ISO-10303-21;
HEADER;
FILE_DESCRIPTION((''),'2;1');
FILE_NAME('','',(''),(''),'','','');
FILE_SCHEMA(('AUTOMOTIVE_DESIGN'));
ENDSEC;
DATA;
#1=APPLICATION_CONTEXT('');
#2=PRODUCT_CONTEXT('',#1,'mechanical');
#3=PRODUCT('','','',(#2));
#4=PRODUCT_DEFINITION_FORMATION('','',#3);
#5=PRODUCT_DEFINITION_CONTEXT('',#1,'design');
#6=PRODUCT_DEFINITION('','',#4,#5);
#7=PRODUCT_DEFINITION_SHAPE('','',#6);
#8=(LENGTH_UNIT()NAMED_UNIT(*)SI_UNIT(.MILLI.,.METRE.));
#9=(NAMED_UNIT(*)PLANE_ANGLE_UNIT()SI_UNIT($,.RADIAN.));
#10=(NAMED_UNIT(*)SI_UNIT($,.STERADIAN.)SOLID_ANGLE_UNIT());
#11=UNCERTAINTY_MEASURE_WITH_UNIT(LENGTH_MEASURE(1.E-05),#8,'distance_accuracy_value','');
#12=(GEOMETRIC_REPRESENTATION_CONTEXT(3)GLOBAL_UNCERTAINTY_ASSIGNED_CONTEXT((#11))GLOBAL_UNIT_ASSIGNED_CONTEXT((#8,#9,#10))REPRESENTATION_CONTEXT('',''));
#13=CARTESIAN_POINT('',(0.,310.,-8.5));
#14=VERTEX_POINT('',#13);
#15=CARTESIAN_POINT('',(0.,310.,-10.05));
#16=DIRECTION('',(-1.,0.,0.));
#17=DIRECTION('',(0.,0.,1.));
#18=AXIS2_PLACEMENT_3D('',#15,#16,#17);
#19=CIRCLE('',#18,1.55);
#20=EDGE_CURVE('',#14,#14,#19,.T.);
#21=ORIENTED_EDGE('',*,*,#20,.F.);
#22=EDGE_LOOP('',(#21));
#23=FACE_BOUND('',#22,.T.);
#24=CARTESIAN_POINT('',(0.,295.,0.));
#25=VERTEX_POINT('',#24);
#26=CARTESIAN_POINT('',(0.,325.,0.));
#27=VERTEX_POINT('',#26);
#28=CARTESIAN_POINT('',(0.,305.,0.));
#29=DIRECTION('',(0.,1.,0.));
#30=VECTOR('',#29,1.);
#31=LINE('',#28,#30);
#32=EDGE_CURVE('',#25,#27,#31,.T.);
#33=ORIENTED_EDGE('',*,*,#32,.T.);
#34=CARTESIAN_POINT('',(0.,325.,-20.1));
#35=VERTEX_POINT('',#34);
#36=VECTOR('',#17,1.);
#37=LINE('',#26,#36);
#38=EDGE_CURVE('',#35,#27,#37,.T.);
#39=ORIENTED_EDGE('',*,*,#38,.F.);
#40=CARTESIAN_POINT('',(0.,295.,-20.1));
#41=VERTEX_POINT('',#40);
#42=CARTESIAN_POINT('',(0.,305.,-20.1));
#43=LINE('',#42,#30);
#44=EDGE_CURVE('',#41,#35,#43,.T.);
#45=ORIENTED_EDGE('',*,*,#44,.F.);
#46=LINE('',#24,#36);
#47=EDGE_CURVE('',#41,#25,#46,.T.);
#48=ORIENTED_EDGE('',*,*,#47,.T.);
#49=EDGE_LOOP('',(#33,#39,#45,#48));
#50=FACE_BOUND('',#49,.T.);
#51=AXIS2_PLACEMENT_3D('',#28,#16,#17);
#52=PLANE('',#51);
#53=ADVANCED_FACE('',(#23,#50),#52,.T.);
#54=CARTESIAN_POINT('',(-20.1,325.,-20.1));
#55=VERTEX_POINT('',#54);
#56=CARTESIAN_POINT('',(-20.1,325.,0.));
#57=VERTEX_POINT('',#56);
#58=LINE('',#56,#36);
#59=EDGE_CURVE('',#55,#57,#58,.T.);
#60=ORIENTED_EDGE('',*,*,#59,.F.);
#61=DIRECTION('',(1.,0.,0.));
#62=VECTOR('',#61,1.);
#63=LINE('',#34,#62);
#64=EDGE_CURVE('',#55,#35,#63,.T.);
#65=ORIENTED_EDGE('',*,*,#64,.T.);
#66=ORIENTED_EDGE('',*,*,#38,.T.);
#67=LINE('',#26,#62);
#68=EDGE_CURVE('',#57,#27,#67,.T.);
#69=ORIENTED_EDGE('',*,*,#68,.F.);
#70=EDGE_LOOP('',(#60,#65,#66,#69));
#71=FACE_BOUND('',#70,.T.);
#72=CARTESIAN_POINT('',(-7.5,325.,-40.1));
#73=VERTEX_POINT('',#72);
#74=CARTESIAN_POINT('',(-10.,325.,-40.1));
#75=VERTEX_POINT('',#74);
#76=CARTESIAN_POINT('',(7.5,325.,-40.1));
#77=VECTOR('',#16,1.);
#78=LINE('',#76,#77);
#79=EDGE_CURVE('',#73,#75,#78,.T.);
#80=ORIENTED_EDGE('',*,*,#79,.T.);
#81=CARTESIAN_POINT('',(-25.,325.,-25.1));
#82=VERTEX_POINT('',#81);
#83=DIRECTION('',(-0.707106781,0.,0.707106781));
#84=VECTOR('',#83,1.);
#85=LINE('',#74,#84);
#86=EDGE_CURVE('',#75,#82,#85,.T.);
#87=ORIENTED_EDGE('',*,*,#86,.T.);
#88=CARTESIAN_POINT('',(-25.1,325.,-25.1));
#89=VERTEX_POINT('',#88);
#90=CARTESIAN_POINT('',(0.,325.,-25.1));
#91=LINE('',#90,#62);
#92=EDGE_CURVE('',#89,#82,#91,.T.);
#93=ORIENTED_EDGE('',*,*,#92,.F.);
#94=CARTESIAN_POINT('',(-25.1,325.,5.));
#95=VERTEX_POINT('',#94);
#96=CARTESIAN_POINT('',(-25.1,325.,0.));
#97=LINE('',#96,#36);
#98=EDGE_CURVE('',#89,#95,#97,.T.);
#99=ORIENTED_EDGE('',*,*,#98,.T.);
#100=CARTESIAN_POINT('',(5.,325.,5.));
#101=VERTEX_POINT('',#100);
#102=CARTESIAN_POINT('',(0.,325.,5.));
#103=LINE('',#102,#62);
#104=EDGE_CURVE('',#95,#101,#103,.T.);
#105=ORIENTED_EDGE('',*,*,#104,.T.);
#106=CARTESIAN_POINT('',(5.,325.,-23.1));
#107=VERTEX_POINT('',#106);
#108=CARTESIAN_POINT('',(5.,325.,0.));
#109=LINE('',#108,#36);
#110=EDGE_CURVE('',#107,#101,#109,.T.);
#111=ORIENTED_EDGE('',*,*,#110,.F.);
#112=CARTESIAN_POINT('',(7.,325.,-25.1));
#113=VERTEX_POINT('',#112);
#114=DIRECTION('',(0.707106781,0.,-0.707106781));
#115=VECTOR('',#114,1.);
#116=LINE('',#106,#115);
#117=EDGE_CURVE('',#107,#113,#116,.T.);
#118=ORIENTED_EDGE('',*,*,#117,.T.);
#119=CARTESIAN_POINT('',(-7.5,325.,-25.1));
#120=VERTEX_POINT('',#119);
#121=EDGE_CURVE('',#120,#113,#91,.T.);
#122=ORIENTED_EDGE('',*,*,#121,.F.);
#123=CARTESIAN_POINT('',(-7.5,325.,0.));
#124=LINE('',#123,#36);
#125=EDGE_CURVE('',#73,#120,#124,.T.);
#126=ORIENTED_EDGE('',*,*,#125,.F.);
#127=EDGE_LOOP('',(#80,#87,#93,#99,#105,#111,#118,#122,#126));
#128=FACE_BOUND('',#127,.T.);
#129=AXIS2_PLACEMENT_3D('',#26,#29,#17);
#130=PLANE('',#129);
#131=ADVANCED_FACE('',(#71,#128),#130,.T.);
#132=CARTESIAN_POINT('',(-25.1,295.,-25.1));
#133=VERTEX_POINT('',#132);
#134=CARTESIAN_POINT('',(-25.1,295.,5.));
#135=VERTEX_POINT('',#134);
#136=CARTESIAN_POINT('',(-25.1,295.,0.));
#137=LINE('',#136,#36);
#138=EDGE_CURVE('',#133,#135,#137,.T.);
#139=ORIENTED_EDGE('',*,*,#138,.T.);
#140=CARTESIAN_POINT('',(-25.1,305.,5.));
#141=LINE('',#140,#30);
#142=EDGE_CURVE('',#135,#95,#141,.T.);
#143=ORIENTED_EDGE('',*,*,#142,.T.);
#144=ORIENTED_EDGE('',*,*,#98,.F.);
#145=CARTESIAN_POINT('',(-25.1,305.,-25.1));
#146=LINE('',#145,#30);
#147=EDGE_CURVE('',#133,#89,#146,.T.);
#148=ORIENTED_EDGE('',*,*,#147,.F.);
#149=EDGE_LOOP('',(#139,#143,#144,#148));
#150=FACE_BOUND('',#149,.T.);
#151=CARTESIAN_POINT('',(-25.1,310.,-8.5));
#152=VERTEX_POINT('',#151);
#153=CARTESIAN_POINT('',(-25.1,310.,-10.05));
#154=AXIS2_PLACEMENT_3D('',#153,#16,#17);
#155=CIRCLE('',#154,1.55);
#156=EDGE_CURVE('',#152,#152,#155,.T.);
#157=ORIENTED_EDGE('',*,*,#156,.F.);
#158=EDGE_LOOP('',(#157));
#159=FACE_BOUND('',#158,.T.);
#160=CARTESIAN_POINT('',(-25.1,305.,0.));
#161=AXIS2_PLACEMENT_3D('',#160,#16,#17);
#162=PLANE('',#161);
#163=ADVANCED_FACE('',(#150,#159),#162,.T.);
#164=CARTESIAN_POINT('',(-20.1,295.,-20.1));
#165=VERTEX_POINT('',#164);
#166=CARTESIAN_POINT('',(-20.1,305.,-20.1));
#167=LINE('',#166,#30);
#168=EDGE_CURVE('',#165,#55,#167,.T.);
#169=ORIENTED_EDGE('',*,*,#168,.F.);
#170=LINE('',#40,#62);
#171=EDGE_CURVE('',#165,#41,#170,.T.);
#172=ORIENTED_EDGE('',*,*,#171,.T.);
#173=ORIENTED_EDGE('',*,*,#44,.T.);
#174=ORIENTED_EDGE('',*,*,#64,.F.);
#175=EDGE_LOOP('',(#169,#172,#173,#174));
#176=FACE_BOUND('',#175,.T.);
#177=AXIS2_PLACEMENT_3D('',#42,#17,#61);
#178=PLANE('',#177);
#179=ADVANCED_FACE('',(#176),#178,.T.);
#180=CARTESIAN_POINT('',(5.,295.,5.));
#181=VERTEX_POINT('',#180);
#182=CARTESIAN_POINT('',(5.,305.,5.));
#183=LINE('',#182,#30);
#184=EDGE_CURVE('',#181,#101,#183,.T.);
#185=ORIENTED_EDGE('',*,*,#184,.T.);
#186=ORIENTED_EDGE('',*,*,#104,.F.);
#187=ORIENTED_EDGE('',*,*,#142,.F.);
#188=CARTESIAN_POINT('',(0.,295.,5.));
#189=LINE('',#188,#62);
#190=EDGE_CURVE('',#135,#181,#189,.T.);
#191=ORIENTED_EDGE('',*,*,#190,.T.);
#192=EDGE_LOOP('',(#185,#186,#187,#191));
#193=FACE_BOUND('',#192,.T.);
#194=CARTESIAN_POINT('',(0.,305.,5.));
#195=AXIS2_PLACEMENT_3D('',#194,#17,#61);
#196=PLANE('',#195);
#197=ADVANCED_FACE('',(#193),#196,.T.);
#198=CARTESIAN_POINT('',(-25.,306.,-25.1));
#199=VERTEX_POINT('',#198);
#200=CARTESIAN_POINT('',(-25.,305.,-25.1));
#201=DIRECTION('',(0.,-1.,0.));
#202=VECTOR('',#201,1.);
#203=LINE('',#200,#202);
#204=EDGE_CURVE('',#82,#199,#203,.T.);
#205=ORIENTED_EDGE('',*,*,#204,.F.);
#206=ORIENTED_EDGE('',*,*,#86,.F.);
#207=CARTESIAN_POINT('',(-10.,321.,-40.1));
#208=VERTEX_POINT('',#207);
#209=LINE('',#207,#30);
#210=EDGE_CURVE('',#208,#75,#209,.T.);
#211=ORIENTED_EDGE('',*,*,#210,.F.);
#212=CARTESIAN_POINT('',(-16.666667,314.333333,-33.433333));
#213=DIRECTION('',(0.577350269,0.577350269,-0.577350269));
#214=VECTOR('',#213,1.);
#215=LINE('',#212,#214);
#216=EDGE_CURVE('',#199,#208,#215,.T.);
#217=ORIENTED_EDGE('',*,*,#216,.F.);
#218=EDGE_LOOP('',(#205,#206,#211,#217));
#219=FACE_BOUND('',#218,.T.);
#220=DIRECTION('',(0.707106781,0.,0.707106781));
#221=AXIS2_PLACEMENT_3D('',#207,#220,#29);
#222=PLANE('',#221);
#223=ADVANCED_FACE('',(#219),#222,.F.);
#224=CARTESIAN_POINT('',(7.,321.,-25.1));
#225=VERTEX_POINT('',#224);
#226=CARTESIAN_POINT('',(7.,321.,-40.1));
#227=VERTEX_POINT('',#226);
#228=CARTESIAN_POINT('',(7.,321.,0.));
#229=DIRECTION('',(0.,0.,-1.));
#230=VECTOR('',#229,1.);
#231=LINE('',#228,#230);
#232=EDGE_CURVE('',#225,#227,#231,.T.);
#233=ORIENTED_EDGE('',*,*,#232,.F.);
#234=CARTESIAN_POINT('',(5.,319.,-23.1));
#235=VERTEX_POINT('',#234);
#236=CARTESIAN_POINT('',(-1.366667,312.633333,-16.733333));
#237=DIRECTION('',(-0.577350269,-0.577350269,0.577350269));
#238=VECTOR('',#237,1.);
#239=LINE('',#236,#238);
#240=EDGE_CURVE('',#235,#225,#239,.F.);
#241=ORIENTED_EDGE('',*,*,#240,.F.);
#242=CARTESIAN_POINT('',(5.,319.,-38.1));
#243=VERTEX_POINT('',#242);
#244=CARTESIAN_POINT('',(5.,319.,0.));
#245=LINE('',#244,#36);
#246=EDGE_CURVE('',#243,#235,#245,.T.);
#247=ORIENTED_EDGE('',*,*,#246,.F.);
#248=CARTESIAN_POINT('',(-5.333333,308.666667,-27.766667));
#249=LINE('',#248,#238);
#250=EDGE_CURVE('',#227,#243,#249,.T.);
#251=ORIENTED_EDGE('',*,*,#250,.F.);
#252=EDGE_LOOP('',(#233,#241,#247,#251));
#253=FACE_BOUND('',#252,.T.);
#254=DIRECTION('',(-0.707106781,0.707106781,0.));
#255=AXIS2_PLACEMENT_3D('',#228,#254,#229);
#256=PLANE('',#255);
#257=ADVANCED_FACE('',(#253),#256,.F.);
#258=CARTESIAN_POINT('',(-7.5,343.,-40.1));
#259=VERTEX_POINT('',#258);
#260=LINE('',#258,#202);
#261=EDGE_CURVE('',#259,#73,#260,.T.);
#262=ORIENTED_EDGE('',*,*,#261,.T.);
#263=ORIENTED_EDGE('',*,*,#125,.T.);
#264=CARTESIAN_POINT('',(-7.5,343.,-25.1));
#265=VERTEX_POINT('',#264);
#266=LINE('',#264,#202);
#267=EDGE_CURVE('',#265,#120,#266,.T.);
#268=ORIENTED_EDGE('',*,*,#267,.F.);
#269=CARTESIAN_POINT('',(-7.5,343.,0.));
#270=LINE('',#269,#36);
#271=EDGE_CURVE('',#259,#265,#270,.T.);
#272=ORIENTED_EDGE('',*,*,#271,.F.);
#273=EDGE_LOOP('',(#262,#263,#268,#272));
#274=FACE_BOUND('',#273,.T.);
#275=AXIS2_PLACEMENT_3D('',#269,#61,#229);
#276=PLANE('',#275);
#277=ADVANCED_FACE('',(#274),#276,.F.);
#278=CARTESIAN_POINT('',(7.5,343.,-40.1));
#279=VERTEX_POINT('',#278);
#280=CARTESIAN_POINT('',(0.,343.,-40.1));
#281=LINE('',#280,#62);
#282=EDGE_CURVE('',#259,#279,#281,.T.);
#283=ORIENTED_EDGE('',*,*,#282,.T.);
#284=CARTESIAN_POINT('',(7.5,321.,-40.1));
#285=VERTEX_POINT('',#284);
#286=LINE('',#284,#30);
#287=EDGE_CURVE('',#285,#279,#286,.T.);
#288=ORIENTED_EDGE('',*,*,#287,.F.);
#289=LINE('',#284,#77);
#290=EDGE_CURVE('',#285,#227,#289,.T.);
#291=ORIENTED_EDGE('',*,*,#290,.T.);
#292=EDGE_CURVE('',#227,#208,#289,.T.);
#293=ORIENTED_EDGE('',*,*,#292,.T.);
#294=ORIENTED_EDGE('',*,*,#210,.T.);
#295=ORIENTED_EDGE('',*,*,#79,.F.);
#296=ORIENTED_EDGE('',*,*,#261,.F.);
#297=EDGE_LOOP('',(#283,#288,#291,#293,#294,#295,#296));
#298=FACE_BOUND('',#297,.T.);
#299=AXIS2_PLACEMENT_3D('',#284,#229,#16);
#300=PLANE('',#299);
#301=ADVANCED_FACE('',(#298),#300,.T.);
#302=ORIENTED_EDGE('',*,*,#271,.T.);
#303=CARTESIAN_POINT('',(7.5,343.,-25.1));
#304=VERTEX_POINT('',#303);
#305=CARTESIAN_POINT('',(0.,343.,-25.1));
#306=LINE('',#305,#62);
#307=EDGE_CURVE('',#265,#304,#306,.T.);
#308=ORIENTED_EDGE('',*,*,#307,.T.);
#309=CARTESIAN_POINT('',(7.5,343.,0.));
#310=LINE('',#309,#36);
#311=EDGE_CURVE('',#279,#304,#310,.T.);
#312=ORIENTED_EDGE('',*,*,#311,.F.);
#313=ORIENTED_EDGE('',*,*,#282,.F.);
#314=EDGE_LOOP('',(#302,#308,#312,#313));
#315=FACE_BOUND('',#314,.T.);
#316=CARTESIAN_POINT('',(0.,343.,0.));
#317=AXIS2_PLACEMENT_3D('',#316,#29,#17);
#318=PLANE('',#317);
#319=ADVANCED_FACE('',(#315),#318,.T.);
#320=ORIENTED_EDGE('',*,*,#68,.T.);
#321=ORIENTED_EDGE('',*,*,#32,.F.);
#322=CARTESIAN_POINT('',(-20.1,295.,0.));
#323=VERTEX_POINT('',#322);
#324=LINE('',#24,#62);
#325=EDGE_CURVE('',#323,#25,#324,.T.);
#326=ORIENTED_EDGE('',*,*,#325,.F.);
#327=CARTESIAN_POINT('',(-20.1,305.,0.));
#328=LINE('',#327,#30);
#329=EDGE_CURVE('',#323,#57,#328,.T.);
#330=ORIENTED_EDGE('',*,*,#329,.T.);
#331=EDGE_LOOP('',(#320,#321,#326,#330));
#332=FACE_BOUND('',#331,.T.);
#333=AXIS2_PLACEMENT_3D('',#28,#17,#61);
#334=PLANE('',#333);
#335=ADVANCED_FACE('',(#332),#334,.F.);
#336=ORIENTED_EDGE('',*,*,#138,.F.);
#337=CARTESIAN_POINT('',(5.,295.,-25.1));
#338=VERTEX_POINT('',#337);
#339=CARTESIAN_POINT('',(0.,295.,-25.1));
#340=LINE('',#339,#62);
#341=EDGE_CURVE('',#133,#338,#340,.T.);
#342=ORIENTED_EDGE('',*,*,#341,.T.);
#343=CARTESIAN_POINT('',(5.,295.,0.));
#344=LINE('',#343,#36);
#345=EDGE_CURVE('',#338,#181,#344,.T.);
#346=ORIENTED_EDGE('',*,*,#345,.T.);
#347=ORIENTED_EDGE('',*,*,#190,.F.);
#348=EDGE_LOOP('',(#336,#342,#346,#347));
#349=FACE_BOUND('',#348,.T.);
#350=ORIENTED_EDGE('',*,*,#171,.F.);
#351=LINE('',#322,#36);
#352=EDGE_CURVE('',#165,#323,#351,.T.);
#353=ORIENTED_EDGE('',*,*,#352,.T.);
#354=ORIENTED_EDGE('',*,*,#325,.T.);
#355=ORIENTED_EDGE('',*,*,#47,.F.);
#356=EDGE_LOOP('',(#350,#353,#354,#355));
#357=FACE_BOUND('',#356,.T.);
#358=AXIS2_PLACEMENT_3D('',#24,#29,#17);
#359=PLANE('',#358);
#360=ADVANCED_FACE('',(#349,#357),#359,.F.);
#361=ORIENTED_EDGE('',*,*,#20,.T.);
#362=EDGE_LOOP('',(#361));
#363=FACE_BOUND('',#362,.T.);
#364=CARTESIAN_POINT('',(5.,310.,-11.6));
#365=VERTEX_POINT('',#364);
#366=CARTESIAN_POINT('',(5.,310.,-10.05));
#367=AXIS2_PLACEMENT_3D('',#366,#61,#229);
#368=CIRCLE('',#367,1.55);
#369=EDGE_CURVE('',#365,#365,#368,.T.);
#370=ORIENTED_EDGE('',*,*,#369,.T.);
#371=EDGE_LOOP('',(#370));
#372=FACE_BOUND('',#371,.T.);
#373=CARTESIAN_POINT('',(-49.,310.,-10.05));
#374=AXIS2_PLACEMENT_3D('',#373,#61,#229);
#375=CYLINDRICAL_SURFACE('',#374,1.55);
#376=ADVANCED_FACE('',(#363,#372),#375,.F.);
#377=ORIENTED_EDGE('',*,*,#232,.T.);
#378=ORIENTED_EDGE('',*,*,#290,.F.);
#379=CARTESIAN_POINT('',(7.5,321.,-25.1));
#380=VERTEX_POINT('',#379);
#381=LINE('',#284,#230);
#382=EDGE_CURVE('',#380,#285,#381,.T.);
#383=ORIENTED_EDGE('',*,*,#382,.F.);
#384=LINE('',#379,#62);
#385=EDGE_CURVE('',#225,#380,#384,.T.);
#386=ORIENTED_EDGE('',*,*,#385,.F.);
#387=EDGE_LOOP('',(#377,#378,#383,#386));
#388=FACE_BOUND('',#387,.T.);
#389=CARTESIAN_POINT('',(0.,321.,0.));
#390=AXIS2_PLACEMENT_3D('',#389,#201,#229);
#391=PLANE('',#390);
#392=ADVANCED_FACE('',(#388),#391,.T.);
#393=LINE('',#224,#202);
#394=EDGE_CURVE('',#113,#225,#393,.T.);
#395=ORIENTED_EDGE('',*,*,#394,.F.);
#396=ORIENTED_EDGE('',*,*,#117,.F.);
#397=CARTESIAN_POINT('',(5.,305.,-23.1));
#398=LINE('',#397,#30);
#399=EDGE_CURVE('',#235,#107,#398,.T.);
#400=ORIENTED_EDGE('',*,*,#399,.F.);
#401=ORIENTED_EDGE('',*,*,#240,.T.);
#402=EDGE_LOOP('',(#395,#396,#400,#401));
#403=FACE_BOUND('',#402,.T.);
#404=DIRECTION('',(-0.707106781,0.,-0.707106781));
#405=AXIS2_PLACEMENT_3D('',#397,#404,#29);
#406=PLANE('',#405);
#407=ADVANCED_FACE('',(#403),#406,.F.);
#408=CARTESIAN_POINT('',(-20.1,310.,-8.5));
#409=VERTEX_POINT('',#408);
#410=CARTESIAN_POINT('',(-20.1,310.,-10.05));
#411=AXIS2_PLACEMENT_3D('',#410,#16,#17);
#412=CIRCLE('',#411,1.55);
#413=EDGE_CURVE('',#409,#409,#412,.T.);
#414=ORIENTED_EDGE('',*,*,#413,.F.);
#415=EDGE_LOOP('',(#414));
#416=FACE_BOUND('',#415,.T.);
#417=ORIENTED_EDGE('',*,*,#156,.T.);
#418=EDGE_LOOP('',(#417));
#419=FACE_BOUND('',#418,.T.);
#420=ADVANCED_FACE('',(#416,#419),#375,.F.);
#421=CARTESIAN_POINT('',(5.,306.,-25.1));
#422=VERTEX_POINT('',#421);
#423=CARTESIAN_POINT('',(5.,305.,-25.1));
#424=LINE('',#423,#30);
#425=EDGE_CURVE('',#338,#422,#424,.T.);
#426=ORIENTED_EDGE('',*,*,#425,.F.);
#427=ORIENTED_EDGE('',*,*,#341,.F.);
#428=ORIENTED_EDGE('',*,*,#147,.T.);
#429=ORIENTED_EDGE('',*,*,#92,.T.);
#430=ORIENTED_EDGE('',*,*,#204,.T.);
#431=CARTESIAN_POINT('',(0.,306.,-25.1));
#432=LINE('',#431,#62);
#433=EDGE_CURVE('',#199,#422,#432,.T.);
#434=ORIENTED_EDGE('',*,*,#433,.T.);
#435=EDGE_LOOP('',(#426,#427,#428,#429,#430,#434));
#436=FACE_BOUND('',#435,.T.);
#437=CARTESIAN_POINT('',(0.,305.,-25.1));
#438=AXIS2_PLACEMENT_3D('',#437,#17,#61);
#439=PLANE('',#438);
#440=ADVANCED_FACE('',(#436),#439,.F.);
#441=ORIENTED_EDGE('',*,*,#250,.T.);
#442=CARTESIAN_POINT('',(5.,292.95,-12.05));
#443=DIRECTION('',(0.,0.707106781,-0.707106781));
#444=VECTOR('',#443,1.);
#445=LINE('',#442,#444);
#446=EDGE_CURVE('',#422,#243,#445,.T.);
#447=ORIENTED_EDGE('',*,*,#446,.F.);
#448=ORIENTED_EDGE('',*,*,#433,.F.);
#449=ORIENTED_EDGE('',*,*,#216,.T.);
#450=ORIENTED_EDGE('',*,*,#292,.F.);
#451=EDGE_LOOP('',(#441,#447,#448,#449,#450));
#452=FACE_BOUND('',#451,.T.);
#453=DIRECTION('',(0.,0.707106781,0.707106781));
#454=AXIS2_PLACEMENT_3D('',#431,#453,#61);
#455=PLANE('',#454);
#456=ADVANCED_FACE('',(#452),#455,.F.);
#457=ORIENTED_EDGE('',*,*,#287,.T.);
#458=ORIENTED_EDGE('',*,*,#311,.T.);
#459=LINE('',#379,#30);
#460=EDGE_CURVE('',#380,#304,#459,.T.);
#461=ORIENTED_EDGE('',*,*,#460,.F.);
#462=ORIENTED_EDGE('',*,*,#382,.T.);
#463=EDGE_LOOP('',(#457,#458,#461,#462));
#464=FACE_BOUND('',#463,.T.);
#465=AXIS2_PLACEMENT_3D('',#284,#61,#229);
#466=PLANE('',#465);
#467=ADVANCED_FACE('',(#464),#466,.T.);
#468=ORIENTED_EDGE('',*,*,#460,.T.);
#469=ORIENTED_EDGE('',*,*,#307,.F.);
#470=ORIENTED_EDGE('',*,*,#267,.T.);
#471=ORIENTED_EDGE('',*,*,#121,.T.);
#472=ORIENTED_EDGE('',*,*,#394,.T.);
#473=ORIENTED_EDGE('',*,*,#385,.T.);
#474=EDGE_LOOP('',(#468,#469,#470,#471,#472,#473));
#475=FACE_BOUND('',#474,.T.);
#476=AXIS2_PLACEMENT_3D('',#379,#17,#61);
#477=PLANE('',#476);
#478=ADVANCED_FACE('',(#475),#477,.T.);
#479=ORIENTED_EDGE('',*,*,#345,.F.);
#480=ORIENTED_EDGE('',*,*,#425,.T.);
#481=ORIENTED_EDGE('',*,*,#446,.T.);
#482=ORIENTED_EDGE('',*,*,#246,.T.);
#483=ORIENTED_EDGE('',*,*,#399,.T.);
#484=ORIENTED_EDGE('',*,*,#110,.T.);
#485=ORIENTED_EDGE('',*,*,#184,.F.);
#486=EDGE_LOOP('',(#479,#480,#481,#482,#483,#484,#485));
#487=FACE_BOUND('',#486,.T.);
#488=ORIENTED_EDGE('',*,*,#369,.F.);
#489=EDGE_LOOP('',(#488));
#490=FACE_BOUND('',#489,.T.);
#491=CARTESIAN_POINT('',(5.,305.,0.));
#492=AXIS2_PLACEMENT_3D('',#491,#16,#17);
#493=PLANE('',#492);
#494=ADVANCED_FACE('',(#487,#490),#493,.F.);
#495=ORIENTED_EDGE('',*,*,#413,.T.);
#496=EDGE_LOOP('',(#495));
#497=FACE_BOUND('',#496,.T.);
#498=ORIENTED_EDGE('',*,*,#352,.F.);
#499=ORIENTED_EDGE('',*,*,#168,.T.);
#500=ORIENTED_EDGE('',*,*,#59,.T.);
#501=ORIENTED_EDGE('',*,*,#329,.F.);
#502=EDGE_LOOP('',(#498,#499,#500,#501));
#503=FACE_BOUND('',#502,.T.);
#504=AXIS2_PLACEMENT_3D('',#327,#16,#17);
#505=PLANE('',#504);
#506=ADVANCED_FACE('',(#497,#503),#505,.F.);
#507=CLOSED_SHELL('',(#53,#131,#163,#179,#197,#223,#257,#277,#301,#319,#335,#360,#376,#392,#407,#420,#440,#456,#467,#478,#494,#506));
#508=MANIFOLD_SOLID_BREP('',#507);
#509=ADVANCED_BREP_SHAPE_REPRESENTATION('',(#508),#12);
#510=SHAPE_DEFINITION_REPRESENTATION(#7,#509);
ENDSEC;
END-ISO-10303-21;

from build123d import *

# Parameters (mm, degrees)
SKETCH4_W                = 20.1
SKETCH4_H                = 20.1
BOSS_EXTRUDE6_DEPTH      = 5
BOSS_EXTRUDE7_DEPTH      = 15
BOSS_EXTRUDE7_DEPTH_BACK = 15
SKETCH4_4_W              = 30.1
SKETCH4_4_H              = 30.1
SKETCH4_4_W_2            = 20.1
SKETCH4_4_H_2            = 20.1
SKETCH5_R                = 1.55
CUT_EXTRUDE1_DEPTH       = 54
BOSS_EXTRUDE8_START      = 15
SKETCH4_5_W              = 15
SKETCH4_5_H              = 15
BOSS_EXTRUDE8_DEPTH      = 18
SKETCH6_W                = 17.5
SKETCH6_H                = 15
BOSS_EXTRUDE9_DEPTH      = 4
CHAMFER1_SIZE            = 15
CHAMFER2_SIZE            = 15
CHAMFER3_SIZE            = 2


with BuildPart() as part:
    # Sketch4 → Boss-Extrude6 (new body)
    with BuildSketch(Plane(origin=(0, 310, 0), x_dir=(1, 0, 0), z_dir=(0, 1, 0))):
        Polygon((5, 25.1), (-7.5, 25.1), (-25.1, 25.1), (-25.1, -5), (5, -5), align=None)
        with Locations((-10.05, 10.05)):
            Rectangle(SKETCH4_W, SKETCH4_H, mode=Mode.SUBTRACT)
    extrude(amount=-BOSS_EXTRUDE6_DEPTH)

    # Sketch4<4> → Boss-Extrude7 (add, two sides: drawn at the far end of the back side and taken through both)
    with BuildSketch(Plane(origin=(0, 310, 0), x_dir=(1, 0, 0), z_dir=(0, 1, 0)).offset(-BOSS_EXTRUDE7_DEPTH_BACK)):
        with Locations((-10.05, 10.05)):
            Rectangle(SKETCH4_4_W, SKETCH4_4_H)
        with Locations((-10.05, 10.05)):
            Rectangle(SKETCH4_4_W_2, SKETCH4_4_H_2, mode=Mode.SUBTRACT)
    extrude(amount=BOSS_EXTRUDE7_DEPTH + BOSS_EXTRUDE7_DEPTH_BACK)

    # Sketch5 → Cut-Extrude1 (cut)
    with BuildSketch(Plane(origin=(5, 0, 0), x_dir=(0, 0, -1), z_dir=(1, 0, 0))):
        with Locations(Location((10.05, 310, 0), (0, 0, 180))):
            Circle(SKETCH5_R)
    extrude(amount=-CUT_EXTRUDE1_DEPTH, mode=Mode.SUBTRACT)



with BuildPart() as body_2:
    # Sketch4<5> → Boss-Extrude8 (new body)
    with BuildSketch(Plane(origin=(0, 310, 0), x_dir=(1, 0, 0), z_dir=(0, 1, 0)).offset(BOSS_EXTRUDE8_START)):
        with Locations((0, 32.6)):
            Rectangle(SKETCH4_5_W, SKETCH4_5_H)
    extrude(amount=BOSS_EXTRUDE8_DEPTH)


with BuildPart() as part_1:
    add(part.part)

    add(body_2.part)  # Boss-Extrude9 merges body 2
    # Sketch6 → Boss-Extrude9 (add)
    with BuildSketch(Plane(origin=(0, 325, 0), x_dir=(1, 0, 0), z_dir=(0, 1, 0))):
        with Locations((-1.25, 32.6)):
            Rectangle(SKETCH6_W, SKETCH6_H)
    extrude(amount=-BOSS_EXTRUDE9_DEPTH)

    # Chamfer1
    chamfer1_edges = [part_1.edges().sort_by_distance(p)[0] for p in [
        (-2.5, 321, -25.1),
    ]]
    chamfer(chamfer1_edges, length=CHAMFER1_SIZE - 0.0001)  # a hair under: the kernel refuses the full size

    # Chamfer2
    chamfer2_edges = [part_1.edges().sort_by_distance(p)[0] for p in [
        (-10, 315.50005, -25.1),
    ]]
    chamfer(chamfer2_edges, length=CHAMFER2_SIZE - 0.0001)  # a hair under: the kernel refuses the full size

    # Chamfer3
    chamfer3_edges = [part_1.edges().sort_by_distance(p)[0] for p in [
        (5, 321, -32.59995),
        (5, 323, -25.1),
    ]]
    chamfer(chamfer3_edges, length=CHAMFER3_SIZE)


solid = part_1.part
